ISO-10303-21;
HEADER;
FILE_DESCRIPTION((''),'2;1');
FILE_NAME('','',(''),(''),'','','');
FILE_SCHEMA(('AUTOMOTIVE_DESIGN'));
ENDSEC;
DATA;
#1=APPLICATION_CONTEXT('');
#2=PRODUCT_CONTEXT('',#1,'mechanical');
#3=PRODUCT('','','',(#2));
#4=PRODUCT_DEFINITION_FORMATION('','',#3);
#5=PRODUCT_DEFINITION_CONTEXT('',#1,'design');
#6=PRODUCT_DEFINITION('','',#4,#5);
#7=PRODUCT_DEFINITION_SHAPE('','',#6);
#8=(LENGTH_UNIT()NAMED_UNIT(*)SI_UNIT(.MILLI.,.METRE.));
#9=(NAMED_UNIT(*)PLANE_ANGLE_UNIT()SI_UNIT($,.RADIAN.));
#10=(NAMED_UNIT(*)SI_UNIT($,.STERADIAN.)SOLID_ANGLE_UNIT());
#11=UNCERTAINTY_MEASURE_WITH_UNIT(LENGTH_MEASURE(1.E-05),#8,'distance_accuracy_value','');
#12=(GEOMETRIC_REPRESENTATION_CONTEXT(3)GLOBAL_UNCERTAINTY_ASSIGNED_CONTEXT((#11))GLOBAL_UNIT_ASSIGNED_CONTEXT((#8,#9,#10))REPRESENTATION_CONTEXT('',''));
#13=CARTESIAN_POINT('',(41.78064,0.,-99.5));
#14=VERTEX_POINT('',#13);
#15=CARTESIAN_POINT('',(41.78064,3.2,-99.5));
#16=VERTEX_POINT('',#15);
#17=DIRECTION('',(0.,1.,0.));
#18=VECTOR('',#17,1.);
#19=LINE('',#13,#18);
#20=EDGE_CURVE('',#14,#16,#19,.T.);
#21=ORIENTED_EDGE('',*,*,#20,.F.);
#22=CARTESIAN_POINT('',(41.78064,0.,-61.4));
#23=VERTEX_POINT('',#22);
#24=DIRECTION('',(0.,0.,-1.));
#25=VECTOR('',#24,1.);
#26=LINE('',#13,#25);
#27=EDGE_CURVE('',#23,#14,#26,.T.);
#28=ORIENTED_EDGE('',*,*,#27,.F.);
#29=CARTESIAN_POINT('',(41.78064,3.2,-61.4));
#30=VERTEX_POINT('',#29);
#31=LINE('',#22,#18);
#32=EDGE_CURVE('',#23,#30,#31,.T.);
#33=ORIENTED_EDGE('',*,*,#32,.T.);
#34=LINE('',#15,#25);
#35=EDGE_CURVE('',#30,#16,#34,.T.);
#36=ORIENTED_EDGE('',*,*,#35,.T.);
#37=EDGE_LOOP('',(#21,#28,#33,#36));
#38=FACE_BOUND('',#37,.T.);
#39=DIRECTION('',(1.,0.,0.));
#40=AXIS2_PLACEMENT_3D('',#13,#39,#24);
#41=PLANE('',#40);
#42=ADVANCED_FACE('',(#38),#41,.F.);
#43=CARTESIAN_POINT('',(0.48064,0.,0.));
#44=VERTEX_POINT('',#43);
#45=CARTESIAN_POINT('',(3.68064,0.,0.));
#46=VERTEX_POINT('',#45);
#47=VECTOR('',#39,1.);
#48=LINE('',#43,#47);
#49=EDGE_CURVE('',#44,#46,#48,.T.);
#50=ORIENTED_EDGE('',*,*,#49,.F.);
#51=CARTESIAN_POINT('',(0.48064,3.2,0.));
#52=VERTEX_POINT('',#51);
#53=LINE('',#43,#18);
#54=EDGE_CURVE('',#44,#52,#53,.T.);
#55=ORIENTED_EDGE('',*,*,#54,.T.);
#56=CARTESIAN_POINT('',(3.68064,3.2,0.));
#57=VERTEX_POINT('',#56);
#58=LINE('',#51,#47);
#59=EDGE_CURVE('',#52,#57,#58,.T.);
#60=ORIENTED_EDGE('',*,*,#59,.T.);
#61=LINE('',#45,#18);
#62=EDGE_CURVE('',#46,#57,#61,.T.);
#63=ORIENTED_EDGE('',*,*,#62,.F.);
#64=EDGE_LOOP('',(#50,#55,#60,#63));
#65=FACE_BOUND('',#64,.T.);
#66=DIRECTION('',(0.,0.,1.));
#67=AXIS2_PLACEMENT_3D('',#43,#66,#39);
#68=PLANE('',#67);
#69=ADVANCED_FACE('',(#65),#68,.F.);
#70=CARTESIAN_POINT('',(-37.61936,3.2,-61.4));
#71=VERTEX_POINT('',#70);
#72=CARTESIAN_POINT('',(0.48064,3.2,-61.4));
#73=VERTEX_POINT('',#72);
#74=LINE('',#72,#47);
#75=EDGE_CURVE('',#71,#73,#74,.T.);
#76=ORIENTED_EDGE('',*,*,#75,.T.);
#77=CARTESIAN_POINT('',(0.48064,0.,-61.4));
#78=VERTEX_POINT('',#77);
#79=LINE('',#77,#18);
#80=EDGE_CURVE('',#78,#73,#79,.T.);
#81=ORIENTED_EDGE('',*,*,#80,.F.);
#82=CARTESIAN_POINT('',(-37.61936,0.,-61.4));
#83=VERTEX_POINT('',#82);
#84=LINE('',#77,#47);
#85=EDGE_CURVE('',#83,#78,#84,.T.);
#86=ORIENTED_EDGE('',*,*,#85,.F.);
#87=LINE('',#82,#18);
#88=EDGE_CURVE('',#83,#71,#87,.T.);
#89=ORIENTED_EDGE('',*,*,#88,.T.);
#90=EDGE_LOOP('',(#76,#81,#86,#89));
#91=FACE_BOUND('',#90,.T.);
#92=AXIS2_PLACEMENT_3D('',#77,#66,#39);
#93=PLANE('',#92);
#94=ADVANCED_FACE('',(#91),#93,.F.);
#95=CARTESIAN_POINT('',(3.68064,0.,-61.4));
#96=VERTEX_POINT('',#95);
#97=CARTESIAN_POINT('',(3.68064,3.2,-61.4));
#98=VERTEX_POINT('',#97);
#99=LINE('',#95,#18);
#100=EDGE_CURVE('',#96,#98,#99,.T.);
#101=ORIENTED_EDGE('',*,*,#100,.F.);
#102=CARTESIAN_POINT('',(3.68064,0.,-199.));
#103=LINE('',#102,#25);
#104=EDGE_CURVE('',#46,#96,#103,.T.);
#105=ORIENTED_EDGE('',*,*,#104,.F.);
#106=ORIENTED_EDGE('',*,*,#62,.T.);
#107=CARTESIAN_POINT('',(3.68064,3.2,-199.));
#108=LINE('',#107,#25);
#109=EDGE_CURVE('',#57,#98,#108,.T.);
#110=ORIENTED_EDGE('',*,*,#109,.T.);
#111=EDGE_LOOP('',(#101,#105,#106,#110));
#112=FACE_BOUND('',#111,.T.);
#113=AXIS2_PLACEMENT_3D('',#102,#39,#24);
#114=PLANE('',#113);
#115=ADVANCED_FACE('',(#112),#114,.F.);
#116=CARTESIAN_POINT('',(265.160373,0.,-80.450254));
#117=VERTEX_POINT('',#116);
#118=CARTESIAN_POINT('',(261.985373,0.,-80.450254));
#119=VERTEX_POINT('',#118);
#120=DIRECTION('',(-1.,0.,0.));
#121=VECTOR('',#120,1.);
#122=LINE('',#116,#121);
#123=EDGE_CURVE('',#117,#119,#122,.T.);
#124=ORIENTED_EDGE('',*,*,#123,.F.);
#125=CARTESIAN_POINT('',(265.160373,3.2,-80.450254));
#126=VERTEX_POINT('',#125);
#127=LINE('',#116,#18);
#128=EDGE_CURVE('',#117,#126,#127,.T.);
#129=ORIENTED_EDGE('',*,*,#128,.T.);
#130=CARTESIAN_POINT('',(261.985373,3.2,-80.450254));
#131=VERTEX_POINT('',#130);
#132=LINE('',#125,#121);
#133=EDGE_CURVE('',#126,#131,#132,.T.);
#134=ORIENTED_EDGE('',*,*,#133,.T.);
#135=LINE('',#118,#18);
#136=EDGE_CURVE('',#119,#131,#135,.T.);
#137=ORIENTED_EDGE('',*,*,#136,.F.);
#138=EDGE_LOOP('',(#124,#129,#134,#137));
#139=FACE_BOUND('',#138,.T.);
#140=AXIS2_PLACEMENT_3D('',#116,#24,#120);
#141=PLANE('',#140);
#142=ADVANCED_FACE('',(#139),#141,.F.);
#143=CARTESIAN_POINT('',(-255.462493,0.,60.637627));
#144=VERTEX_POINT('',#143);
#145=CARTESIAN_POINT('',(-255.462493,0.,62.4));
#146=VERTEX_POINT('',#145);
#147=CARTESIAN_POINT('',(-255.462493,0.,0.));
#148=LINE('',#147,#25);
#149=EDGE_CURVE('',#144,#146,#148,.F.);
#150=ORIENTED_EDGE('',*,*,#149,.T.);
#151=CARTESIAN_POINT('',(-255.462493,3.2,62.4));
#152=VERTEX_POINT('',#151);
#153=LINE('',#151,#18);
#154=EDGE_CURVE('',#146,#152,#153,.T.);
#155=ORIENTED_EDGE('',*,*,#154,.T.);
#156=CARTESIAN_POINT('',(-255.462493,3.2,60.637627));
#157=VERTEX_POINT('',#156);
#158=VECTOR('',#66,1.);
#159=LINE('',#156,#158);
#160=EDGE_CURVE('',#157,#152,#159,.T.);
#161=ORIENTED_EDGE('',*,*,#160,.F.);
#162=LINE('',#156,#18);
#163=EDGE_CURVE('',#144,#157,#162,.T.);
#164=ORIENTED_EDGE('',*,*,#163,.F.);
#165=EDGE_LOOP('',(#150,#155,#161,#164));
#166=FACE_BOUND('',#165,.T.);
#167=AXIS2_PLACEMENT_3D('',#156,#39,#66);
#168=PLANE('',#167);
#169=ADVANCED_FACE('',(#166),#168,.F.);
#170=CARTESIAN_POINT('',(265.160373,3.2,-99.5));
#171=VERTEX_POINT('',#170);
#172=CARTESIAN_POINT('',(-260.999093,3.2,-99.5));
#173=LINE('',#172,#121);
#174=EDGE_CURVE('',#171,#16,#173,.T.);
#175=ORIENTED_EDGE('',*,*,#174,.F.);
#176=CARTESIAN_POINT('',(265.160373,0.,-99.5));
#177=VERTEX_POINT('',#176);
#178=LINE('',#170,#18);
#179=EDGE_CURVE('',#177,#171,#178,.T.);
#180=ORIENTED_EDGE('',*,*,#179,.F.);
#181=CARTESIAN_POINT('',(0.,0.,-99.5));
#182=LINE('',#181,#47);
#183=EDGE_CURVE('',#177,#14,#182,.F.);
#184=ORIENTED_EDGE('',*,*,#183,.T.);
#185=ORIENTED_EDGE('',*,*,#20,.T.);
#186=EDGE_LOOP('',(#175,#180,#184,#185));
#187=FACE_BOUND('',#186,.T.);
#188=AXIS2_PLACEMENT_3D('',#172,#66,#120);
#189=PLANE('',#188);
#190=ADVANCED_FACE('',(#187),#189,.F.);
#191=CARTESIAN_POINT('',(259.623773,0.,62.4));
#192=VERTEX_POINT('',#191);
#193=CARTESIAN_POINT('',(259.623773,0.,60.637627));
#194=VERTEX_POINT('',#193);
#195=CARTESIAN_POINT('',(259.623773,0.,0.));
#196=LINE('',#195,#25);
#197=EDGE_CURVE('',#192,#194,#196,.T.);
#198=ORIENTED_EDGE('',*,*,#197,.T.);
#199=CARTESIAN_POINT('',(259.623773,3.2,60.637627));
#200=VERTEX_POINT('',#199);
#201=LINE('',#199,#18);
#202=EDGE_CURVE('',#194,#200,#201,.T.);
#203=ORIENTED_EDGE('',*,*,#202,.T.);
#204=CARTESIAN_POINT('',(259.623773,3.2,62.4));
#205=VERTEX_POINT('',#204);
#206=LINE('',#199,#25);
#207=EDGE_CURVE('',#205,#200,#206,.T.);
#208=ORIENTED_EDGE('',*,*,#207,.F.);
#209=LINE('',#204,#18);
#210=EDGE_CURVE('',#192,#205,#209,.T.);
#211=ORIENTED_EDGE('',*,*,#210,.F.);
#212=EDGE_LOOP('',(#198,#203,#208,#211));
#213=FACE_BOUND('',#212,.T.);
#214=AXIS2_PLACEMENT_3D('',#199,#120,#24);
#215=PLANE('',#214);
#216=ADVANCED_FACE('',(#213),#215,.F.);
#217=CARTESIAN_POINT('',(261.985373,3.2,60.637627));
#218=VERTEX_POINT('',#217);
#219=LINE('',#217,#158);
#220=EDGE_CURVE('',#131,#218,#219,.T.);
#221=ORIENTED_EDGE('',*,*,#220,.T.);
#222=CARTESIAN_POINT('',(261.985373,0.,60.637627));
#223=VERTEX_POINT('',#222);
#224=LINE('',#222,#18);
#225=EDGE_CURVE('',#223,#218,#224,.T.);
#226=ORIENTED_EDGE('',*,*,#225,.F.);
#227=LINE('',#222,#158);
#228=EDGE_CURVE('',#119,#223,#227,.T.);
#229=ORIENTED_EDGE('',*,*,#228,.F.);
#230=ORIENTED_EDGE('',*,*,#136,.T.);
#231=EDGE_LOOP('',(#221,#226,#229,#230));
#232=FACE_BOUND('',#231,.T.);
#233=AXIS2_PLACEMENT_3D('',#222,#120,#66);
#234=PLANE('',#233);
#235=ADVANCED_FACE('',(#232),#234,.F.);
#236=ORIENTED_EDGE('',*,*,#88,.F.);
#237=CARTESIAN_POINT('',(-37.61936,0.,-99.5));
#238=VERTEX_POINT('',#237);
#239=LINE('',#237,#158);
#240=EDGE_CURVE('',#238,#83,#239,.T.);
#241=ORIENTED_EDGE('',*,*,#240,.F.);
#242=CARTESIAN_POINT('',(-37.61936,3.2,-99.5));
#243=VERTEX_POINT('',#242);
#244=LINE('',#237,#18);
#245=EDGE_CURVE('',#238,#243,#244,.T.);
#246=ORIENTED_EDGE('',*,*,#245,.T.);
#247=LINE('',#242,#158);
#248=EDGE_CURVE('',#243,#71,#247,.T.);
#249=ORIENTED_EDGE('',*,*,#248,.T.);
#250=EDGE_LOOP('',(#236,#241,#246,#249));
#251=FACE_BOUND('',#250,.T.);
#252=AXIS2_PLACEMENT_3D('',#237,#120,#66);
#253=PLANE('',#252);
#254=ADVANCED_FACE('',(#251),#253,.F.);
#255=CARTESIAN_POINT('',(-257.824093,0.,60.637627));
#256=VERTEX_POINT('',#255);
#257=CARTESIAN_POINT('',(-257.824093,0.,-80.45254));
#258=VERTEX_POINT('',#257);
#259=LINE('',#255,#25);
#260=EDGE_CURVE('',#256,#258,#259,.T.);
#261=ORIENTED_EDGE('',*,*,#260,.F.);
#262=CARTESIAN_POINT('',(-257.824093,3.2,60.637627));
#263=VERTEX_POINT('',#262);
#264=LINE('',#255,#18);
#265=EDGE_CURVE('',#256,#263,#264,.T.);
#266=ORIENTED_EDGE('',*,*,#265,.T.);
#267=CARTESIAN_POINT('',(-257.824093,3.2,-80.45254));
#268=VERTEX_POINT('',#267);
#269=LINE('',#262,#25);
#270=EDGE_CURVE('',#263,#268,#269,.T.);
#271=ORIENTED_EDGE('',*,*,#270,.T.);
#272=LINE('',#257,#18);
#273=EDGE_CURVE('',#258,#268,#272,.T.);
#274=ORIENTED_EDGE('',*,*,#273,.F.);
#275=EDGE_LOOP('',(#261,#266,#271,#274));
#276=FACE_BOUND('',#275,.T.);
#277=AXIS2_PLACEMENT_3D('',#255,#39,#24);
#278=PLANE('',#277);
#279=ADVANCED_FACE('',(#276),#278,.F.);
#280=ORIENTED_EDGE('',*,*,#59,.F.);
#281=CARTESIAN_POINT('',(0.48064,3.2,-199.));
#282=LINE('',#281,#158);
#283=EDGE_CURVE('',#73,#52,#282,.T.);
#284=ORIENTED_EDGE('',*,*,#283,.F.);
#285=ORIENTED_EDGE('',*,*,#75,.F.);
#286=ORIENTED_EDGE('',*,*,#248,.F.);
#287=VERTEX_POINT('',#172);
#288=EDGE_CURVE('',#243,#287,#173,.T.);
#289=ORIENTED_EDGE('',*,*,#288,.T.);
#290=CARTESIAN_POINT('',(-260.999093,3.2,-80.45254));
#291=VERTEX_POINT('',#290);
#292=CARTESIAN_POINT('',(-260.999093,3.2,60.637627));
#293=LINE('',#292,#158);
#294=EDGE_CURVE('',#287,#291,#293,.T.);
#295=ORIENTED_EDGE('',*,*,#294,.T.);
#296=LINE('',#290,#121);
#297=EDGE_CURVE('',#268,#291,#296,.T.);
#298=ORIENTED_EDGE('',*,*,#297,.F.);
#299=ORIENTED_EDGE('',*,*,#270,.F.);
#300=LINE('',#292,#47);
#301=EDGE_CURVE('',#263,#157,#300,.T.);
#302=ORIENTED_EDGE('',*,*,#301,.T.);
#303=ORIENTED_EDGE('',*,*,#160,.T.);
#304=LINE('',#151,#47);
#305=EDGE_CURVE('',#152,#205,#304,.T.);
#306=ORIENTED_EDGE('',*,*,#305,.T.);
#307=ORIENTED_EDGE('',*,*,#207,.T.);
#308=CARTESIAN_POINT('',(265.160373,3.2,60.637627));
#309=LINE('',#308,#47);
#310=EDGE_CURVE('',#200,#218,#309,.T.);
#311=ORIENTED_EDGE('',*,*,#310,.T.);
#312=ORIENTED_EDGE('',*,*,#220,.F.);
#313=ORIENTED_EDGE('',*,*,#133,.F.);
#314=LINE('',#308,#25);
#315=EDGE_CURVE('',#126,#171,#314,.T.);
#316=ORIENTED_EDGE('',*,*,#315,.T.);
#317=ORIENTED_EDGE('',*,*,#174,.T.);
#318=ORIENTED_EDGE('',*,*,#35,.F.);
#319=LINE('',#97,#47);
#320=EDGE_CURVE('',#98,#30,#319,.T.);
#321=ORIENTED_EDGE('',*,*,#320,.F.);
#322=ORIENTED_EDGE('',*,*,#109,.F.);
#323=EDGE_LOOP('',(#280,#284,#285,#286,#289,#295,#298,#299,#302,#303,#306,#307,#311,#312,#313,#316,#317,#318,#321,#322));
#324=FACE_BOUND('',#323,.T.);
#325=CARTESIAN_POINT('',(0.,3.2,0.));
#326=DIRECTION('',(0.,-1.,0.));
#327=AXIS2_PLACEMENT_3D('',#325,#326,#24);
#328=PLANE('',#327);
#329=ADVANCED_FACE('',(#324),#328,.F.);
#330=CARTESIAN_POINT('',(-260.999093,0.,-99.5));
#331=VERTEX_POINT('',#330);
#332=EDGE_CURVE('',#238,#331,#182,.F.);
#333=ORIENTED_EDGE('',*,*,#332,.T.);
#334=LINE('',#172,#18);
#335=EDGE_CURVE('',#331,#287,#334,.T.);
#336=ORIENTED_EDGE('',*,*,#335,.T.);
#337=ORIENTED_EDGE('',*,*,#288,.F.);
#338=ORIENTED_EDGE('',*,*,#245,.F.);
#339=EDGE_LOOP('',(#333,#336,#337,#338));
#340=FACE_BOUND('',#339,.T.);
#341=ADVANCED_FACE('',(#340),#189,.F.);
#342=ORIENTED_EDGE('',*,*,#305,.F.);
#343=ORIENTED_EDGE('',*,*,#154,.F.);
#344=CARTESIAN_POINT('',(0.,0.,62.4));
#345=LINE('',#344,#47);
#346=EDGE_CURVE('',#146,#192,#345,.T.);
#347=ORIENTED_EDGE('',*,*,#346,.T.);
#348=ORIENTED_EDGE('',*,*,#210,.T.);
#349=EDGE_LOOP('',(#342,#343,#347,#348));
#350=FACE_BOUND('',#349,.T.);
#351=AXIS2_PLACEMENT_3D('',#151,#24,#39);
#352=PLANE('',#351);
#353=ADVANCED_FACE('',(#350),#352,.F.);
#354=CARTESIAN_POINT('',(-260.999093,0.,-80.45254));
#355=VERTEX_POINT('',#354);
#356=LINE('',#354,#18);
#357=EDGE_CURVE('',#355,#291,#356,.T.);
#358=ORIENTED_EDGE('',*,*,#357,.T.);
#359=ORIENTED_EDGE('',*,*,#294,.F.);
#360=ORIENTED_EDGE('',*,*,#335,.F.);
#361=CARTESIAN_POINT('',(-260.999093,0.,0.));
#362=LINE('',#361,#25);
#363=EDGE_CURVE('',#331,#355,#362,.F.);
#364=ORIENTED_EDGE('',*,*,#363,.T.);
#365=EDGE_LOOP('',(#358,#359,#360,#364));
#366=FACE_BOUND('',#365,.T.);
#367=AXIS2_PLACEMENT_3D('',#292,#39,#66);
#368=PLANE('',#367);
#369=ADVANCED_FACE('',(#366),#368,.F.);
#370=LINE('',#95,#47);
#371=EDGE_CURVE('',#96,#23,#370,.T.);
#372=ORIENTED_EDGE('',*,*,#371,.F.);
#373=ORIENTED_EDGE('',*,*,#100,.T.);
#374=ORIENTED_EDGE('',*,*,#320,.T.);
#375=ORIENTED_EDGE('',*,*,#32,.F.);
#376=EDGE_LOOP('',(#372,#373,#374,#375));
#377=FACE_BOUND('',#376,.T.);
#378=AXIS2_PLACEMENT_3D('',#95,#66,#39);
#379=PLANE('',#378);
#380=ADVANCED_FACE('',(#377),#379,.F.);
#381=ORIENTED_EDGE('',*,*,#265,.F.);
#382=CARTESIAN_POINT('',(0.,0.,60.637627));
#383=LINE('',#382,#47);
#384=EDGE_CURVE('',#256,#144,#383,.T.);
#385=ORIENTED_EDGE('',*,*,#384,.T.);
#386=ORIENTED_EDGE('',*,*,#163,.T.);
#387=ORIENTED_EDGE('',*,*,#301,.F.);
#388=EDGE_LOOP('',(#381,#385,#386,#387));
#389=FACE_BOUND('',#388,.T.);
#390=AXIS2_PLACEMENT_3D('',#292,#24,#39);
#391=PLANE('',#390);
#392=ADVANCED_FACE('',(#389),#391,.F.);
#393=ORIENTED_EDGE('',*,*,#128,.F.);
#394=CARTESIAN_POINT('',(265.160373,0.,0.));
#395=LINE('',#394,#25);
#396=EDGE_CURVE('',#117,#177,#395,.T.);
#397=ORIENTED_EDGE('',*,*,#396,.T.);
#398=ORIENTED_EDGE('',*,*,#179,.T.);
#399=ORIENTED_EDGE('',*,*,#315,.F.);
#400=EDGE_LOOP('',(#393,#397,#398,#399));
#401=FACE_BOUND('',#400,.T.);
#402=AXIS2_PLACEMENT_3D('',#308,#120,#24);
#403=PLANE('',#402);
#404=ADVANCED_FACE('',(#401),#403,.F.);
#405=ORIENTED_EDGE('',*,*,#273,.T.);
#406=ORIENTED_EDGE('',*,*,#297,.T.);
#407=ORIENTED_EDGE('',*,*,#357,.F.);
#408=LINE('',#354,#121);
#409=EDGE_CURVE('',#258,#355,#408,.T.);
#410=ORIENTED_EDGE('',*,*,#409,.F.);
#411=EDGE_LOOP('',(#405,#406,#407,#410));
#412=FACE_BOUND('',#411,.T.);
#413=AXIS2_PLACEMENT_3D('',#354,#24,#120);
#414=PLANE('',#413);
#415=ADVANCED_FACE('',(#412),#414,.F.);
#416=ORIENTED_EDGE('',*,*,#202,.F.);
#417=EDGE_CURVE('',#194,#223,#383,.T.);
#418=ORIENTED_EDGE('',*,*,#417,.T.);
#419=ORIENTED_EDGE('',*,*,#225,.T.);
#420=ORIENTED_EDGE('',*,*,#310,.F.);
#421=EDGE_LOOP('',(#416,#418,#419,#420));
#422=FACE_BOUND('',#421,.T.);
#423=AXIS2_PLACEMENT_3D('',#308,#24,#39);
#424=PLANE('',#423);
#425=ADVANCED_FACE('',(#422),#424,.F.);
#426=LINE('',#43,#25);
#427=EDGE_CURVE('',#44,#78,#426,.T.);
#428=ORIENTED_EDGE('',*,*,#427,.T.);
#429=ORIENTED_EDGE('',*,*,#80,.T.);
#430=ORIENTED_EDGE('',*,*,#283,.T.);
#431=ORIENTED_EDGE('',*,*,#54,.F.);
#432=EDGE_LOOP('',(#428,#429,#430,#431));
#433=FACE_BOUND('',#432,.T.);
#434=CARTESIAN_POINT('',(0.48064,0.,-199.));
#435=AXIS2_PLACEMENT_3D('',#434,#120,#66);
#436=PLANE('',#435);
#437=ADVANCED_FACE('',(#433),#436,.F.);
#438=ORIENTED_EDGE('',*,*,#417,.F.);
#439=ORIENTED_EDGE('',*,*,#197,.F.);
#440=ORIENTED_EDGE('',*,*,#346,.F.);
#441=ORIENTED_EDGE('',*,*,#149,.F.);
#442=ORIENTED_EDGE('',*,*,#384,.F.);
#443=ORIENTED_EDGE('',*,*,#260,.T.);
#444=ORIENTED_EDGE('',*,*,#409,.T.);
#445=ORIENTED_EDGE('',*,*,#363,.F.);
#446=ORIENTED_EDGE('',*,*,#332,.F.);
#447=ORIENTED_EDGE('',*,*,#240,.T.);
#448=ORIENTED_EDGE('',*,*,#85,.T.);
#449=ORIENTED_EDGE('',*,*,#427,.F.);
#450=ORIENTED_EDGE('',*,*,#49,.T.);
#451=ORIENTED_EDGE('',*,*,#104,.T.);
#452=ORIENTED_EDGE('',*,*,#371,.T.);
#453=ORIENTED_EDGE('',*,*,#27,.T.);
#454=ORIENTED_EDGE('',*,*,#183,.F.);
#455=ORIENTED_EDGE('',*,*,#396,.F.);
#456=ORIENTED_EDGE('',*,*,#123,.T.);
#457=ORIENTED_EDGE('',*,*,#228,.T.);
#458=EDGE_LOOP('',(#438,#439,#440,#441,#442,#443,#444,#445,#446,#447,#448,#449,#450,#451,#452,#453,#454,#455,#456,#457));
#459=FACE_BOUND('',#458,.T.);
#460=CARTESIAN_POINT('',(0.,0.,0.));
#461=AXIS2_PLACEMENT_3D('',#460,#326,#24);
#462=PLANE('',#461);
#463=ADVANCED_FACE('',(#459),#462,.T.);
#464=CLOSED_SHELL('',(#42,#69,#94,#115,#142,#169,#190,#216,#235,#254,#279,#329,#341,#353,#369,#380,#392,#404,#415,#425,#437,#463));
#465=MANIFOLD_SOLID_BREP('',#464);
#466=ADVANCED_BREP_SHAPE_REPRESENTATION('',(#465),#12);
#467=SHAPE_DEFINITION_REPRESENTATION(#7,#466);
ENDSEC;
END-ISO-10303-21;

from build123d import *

# Parameters (mm, degrees)
BOSS_EXTRUDE1_DEPTH = 3.2
SKETCH11_W          = 3.2
SKETCH11_H          = 199.000000018
CUT_EXTRUDE1_DEPTH  = 284.232260808
SKETCH13_W          = 38.1
SKETCH13_H          = 38.1
CUT_EXTRUDE3_DEPTH  = 284.232260808
SKETCH15_W          = 3.175
SKETCH15_H          = 141.090166638
SKETCH15_H_2        = 141.087880638
CUT_EXTRUDE5_DEPTH  = 284.232260808


with BuildPart() as part:
    # Sketch1 → Boss-Extrude1 (new body)
    with BuildSketch(Plane(origin=(0, 0, 0), x_dir=(1, 0, 0), z_dir=(0, 1, 0))):
        Polygon((265.160373285, -60.637626629), (259.623773233, -60.637626629), (259.623773233, -62.400000041), (-255.462493265, -62.400000041), (-255.462493265, -60.637626629), (-260.999093317, -60.637626629), (-260.999093317, 99.500000009), (265.160373285, 99.500000009), align=None)
    extrude(amount=BOSS_EXTRUDE1_DEPTH)

    # Sketch11 → Cut-Extrude1 (cut, through all)
    with BuildSketch(Plane(origin=(0, 3.2, 0), x_dir=(1, 0, 0), z_dir=(0, 1, 0))):
        with Locations((2.080639984, 99.500000009)):
            Rectangle(SKETCH11_W, SKETCH11_H)
    extrude(amount=-CUT_EXTRUDE1_DEPTH, mode=Mode.SUBTRACT)

    # Sketch13 → Cut-Extrude3 (cut, through all)
    with BuildSketch(Plane(origin=(0, 3.2, 0), x_dir=(1, 0, 0), z_dir=(0, 1, 0))):
        with Locations((-18.569360016, 80.450000009)):
            Rectangle(SKETCH13_W, SKETCH13_H)
        with Locations((22.730639984, 80.450000009)):
            Rectangle(SKETCH13_W, SKETCH13_H)
    extrude(amount=-CUT_EXTRUDE3_DEPTH, mode=Mode.SUBTRACT)

    # Sketch15 → Cut-Extrude5 (cut, through all)
    with BuildSketch(Plane(origin=(0, 3.2, 0), x_dir=(1, 0, 0), z_dir=(0, 1, 0))):
        with Locations((-259.411593317, 9.90745669)):
            Rectangle(SKETCH15_W, SKETCH15_H)
        with Locations((263.572873285, 9.90631369)):
            Rectangle(SKETCH15_W, SKETCH15_H_2)
    extrude(amount=-CUT_EXTRUDE5_DEPTH, mode=Mode.SUBTRACT)


solid = part.part
